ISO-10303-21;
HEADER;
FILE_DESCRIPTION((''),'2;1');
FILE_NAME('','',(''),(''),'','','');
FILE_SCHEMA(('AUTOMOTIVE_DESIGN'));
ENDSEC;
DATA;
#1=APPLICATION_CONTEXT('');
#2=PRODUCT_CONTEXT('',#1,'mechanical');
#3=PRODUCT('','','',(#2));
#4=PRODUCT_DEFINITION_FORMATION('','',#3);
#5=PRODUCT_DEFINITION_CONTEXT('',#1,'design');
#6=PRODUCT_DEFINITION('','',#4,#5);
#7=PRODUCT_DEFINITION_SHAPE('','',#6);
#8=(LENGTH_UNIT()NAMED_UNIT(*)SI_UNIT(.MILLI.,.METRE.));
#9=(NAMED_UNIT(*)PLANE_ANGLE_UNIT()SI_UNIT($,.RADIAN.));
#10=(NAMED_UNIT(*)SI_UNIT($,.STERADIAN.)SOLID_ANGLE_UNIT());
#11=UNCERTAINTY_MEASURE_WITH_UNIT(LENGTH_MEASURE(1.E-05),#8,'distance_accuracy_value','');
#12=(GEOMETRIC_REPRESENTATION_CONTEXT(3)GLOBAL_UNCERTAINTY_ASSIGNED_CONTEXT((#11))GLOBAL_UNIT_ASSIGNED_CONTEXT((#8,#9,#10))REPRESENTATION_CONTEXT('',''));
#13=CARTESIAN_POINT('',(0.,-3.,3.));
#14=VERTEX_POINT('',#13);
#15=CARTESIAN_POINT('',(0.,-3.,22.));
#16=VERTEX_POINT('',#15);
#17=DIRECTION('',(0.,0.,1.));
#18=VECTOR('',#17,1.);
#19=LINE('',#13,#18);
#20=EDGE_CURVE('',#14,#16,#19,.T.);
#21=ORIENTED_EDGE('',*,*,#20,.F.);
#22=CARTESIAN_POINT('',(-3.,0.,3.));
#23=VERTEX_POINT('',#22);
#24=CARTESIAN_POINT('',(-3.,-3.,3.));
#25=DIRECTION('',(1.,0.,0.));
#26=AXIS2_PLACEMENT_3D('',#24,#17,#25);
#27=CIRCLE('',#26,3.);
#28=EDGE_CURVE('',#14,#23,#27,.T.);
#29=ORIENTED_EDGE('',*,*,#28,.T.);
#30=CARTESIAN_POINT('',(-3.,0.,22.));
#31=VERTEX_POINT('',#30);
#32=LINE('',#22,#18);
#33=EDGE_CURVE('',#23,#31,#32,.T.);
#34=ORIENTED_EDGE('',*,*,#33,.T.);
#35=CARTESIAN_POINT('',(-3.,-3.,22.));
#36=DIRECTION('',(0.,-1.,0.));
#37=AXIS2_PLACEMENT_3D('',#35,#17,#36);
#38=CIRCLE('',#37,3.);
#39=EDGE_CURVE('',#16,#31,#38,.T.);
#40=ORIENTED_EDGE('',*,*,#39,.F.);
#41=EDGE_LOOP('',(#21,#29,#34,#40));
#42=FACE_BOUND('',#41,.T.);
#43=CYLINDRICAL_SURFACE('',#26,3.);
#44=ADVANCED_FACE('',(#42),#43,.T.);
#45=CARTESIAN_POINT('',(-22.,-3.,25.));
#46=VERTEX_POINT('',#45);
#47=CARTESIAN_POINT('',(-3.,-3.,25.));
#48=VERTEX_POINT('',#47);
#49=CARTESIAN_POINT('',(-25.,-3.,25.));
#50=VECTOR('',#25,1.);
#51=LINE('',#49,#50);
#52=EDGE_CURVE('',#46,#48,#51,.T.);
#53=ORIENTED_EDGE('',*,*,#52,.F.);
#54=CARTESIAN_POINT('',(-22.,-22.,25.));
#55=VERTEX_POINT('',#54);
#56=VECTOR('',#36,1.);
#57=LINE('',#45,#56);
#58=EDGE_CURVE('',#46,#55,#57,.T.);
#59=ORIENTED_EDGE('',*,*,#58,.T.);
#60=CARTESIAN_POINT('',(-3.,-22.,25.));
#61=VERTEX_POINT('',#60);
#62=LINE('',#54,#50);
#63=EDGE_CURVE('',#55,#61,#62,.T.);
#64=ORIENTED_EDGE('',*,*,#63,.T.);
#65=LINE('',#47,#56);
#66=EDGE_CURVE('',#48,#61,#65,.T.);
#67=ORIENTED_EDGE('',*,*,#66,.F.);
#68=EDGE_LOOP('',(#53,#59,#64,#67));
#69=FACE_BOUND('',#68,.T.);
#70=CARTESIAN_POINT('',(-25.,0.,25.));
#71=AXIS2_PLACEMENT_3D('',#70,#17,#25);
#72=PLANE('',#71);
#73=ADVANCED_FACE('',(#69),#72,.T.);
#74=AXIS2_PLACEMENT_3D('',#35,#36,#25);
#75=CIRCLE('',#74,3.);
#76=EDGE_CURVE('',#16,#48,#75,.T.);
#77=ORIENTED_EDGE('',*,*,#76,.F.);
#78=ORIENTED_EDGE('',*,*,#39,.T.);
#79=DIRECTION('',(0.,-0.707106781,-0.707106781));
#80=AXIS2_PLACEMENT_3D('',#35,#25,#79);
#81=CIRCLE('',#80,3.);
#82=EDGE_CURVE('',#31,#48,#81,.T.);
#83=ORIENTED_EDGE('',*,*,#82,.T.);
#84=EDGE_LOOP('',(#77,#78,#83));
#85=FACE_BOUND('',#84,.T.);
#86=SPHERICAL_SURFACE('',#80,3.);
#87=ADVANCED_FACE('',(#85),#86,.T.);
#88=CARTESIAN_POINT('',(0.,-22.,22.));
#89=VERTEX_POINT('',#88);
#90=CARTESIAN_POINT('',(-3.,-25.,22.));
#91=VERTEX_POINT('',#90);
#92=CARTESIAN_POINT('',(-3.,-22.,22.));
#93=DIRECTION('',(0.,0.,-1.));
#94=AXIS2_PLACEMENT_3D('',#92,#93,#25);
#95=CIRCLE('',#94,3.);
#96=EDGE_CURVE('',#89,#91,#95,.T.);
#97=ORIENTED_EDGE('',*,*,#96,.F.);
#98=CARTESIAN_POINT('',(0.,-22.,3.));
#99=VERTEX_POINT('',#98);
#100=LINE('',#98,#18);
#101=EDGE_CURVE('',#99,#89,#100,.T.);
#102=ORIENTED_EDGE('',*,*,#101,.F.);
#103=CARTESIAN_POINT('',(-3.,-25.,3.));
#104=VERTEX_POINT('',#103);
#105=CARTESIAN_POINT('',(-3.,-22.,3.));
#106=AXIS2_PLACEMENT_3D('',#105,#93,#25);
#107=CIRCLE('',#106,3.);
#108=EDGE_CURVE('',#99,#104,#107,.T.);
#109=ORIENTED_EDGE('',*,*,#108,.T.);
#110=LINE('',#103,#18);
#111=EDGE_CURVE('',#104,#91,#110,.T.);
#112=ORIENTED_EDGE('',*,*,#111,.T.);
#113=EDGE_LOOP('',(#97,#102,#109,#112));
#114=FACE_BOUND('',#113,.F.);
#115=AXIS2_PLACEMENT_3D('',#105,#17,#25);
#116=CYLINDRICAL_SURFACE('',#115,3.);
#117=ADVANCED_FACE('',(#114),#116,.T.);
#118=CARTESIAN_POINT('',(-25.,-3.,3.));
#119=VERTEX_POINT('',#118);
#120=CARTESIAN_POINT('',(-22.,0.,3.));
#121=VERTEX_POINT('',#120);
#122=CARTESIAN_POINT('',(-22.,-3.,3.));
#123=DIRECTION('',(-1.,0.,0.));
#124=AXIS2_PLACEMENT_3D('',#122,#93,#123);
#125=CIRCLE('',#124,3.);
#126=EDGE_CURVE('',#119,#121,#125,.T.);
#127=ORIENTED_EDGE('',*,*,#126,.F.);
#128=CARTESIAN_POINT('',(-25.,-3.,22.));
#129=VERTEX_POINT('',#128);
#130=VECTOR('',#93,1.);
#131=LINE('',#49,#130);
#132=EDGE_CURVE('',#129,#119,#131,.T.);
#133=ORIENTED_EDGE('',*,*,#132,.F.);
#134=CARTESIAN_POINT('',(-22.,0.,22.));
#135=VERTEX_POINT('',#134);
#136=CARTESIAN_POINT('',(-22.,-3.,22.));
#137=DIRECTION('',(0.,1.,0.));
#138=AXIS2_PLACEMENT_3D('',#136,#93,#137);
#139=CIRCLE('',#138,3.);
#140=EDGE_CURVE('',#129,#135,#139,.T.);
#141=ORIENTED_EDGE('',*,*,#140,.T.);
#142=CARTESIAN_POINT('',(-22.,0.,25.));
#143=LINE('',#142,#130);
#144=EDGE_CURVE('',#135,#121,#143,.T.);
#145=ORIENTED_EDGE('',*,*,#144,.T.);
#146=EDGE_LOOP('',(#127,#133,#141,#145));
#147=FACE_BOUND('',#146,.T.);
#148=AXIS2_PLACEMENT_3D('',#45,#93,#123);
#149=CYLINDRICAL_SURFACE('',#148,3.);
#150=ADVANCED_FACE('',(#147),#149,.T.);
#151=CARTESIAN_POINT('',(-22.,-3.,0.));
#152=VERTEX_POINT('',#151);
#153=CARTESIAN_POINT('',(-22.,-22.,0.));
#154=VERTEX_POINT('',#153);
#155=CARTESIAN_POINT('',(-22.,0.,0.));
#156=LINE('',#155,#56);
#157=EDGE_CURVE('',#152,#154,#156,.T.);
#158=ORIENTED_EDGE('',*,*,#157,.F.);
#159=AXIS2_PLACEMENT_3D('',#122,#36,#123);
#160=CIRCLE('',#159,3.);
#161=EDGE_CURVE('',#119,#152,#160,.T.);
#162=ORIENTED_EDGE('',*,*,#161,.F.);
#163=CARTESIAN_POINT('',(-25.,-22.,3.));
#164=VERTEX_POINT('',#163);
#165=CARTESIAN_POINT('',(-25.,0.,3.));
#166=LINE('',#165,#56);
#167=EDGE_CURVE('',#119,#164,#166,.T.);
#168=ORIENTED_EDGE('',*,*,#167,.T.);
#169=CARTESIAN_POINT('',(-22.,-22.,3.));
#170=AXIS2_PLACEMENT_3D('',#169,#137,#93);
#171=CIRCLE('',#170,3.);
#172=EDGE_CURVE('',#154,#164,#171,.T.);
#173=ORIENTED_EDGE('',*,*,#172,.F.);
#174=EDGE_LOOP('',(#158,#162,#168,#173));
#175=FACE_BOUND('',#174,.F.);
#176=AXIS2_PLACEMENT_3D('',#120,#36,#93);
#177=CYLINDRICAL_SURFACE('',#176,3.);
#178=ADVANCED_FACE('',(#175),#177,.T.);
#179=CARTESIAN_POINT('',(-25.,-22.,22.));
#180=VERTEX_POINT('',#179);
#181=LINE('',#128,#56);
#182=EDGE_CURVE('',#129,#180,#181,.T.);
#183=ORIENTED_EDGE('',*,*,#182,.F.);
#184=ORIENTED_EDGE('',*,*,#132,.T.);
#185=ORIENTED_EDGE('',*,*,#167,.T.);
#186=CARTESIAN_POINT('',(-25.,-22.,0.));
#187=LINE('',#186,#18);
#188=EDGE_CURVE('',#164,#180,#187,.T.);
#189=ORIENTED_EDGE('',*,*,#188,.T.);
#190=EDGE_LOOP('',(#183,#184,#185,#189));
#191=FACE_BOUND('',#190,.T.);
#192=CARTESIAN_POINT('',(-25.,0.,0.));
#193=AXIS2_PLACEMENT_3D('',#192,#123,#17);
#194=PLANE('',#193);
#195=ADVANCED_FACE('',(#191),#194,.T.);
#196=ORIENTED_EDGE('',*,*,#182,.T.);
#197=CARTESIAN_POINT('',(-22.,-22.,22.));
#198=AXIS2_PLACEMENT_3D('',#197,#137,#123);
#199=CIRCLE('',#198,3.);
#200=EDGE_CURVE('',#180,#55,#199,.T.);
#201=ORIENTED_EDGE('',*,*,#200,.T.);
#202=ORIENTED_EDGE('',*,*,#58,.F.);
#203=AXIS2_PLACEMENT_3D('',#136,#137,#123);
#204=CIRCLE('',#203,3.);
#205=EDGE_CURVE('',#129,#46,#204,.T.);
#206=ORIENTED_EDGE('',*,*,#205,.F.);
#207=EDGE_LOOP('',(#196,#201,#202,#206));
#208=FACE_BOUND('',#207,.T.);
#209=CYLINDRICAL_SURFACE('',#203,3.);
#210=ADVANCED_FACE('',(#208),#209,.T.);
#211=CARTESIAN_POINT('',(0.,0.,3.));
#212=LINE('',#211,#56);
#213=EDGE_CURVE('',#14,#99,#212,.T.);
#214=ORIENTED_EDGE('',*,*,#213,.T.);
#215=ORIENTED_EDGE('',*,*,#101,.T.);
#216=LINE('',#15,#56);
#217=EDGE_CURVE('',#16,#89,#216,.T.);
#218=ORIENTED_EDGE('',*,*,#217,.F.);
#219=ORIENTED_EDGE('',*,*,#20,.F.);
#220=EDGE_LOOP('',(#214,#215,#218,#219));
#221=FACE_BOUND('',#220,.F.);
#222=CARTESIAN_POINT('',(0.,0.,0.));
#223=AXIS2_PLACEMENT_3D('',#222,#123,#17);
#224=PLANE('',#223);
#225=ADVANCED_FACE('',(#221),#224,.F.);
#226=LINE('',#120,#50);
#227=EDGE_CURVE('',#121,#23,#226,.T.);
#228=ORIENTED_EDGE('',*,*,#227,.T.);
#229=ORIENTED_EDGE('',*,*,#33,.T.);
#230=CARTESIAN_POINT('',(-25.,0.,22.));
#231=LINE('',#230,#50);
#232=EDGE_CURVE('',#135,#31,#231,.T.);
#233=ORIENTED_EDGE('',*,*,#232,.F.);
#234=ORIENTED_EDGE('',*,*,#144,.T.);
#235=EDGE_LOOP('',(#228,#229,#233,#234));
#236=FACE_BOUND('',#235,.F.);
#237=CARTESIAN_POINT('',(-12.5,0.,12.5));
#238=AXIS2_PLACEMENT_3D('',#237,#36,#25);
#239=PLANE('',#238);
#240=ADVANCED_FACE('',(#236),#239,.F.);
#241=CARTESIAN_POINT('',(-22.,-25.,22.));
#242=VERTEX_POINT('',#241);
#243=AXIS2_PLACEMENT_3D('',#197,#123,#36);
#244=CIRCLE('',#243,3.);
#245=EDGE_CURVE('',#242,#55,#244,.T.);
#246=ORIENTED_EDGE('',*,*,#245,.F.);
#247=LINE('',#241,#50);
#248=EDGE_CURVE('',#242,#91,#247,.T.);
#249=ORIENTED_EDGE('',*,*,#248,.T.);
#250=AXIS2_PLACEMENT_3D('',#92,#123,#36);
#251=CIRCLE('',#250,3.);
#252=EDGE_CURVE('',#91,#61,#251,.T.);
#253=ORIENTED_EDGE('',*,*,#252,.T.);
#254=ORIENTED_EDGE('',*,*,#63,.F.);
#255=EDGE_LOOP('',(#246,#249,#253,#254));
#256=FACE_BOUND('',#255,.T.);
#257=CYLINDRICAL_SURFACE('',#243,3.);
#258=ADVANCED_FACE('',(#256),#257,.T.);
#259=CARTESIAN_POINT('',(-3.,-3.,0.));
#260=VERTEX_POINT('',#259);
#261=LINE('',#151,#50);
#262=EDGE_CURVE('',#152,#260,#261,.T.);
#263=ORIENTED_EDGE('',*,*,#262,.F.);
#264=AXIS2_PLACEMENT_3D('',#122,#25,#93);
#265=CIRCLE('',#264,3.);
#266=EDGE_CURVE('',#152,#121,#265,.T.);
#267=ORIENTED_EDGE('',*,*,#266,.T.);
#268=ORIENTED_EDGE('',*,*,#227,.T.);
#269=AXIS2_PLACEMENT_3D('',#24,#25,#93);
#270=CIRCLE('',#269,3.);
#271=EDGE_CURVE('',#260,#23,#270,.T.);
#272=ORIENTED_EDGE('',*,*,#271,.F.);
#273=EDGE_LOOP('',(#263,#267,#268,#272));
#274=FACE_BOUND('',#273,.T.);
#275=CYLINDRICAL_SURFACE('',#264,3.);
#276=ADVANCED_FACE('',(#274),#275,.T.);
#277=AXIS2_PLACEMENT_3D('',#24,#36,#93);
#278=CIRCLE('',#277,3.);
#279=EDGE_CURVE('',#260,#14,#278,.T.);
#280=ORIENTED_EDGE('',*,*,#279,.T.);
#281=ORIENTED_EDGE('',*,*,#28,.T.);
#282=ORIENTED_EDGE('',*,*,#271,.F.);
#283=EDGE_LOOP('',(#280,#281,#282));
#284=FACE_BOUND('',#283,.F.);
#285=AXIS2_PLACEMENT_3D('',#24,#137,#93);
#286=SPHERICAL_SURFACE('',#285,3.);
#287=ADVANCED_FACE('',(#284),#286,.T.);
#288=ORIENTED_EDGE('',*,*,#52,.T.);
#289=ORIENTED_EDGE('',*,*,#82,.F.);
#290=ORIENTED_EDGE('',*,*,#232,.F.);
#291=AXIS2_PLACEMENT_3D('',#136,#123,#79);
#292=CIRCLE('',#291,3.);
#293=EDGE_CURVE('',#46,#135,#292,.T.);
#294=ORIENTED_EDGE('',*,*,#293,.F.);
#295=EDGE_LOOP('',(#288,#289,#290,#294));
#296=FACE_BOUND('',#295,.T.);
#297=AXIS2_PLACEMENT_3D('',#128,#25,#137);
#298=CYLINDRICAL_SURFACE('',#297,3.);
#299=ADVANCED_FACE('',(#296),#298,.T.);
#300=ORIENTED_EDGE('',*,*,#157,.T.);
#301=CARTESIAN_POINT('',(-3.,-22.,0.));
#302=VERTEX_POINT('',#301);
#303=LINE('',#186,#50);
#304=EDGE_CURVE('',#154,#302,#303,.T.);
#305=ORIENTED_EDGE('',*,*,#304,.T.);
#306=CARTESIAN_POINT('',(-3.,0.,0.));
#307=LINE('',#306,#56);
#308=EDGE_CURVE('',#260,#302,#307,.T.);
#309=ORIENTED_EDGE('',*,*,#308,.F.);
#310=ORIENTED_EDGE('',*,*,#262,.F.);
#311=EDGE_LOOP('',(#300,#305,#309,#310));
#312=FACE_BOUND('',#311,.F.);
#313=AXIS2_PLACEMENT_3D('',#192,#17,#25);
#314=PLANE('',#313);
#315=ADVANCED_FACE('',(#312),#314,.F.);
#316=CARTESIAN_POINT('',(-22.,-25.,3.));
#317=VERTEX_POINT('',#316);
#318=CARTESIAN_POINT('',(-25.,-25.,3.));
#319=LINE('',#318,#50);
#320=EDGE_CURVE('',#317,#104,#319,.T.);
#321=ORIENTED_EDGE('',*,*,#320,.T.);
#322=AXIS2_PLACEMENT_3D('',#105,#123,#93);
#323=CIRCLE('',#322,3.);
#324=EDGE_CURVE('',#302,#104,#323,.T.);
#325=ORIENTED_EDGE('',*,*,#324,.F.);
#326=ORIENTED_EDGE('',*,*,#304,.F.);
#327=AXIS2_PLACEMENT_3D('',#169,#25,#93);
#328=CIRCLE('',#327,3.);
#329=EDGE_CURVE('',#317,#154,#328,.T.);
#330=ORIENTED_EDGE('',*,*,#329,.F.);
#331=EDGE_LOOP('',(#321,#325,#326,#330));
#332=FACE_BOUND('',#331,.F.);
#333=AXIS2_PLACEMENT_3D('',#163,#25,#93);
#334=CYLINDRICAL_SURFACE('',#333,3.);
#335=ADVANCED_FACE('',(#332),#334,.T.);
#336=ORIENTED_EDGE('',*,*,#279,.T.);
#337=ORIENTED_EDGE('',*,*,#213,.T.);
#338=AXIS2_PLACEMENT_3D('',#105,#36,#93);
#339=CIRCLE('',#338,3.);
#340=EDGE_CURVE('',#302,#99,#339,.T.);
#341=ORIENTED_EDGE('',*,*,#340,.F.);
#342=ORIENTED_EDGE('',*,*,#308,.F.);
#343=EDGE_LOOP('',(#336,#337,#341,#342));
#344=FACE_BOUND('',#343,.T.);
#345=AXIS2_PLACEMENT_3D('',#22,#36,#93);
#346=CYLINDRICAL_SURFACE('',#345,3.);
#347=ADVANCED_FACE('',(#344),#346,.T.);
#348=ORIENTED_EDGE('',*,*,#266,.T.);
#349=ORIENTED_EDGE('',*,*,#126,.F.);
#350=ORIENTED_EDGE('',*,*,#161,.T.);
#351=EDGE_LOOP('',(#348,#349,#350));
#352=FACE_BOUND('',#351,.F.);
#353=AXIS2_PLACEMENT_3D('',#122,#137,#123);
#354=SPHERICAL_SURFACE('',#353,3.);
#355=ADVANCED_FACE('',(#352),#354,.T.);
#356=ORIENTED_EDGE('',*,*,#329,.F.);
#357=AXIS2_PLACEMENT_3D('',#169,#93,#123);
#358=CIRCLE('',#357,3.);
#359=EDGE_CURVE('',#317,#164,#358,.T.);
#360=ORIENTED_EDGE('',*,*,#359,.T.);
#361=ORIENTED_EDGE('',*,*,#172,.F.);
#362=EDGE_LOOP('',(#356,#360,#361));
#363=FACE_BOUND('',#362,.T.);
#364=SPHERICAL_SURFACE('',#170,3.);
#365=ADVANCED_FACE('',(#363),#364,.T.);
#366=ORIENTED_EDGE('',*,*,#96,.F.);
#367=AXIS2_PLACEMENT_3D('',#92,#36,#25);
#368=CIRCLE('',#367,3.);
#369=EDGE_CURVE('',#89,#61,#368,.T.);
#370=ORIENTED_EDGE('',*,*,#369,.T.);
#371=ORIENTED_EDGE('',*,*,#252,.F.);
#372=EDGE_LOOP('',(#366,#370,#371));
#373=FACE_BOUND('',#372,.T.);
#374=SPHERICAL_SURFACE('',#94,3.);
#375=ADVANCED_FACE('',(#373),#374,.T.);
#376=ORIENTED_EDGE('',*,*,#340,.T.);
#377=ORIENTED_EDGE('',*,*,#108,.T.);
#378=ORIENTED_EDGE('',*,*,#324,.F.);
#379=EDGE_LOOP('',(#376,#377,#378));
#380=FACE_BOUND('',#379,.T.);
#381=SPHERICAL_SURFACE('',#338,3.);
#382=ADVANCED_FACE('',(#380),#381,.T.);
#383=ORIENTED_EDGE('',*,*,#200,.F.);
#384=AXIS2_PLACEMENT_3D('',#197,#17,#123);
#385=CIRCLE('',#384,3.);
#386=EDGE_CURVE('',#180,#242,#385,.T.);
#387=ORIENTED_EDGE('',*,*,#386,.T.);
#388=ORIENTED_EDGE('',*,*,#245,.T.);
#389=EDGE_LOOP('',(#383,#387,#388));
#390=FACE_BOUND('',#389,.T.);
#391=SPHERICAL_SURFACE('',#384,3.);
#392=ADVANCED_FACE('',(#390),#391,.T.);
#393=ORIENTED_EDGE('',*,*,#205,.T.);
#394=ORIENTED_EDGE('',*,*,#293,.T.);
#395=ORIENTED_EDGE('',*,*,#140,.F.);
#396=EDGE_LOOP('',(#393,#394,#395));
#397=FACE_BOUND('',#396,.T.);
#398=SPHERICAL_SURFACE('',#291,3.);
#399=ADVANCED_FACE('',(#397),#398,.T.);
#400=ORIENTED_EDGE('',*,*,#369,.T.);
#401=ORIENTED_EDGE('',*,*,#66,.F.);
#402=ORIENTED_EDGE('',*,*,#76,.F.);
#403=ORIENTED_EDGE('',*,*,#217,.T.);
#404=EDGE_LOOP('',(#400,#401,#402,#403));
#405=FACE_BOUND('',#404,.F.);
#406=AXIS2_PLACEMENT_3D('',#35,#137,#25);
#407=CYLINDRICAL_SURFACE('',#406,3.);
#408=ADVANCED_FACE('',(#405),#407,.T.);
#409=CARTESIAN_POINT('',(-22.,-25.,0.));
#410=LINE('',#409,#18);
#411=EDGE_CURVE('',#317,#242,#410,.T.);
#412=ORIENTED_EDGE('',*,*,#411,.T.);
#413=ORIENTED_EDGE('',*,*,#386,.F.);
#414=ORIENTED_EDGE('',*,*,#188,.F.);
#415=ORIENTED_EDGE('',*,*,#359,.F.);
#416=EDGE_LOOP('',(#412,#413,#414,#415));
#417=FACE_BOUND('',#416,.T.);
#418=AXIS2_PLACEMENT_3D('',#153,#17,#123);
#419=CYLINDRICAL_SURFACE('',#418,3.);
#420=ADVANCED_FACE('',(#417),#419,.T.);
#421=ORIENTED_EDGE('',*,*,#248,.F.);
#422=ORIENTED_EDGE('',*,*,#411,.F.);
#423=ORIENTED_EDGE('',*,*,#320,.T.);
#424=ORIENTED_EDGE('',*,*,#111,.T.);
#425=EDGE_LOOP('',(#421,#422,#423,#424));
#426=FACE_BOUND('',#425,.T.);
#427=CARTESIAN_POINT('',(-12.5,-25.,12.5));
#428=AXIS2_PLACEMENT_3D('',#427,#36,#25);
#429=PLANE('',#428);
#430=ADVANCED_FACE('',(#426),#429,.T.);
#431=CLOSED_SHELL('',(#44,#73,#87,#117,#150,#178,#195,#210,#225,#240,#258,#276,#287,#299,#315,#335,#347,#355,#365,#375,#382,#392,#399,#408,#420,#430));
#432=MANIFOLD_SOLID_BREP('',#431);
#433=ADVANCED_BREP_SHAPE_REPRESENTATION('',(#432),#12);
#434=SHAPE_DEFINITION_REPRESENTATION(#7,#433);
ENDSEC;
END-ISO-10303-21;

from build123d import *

# Parameters (mm, degrees)
F0_W         = 25
F0_H         = 25
F1_DEPTH     = 25
F2_R         = 3
F3_R         = 3
F4_R         = 3
F5_T1_DEPTH  = 19
F5_T3_DEPTH  = 19
F5_S7_W      = 3
F5_S7_H      = 3
F5_T8_DEPTH  = 3
F5_S13_W     = 3
F5_S13_H     = 3
F5_T14_DEPTH = 3
F5_T18_ANGLE = 90
F5_T20_ANGLE = 90


# Not quite as in the source:
# - a fillet or chamfer that OpenCascade refuses, or shapes differently, is made with other operations: its cross-section is extruded or revolved along the edge and cut away or added


with BuildPart() as f1:
    # F0 (on Front) → F1 (new body)
    with BuildSketch(Plane.XZ):
        with Locations((-12.5, 12.5)):
            Rectangle(F0_W, F0_H)
    extrude(amount=F1_DEPTH)

    # F2
    f2_edges = [f1.edges().sort_by_distance(p)[0] for p in [
        (0, -12.5, 0),
    ]]
    fillet(f2_edges, radius=F2_R)

    # F3
    f3_edges = [f1.edges().sort_by_distance(p)[0] for p in [
        (-25, -12.5, 0),
        (-14, -25, 0),
        (-25, -25, 12.5),
    ]]
    fillet(f3_edges, radius=F3_R)

    # F4
    f4_edges = [f1.edges().sort_by_distance(p)[0] for p in [
        (-12.5, 0, 0),
        (0, 0, 14),
        (-25, 0, 14),
        (-12.5, 0, 25),
    ]]
    fillet(f4_edges, radius=F4_R)

    # F5: fillet of radius 3 on 3 edges, made by hand

    # F5_s2 → F5_t1 (cut)
    with BuildSketch(Plane.XZ.offset(3)):
        with BuildLine():
            ThreePointArc((-25, 22), (-24.1213203436, 24.1213203436), (-22, 25))
            Line((-22, 25), (-25, 25))
            Line((-25, 25), (-25, 22))
        make_face()
        with BuildLine():
            ThreePointArc((0, 22), (-0.8786796564, 24.1213203436), (-3, 25))
            Line((-3, 25), (0, 25))
            Line((0, 25), (0, 22))
        make_face()
    extrude(amount=F5_T1_DEPTH, mode=Mode.SUBTRACT)

    # F5_s4 → F5_t3 (cut)
    with BuildSketch(Plane.YZ.offset(-22)):
        with BuildLine():
            ThreePointArc((-25, 22), (-24.1213203436, 24.1213203436), (-22, 25))
            Line((-22, 25), (-25, 25))
            Line((-25, 25), (-25, 22))
        make_face()
    extrude(amount=F5_T3_DEPTH, mode=Mode.SUBTRACT)


with BuildPart() as f5_tool6:
    # F5_s7 → F5_t8 (new body)
    with BuildSketch(Plane.YZ.offset(-3)):
        with Locations((-1.5, 23.5)):
            Rectangle(F5_S7_W, F5_S7_H)
    extrude(amount=F5_T8_DEPTH)

    # F5_s9 → F5_t10 (revolve, cut)
    with BuildSketch(Plane(origin=(-3, -3, 22), x_dir=(0, -0.7071067812, -0.7071067812), z_dir=(0, -0.7071067812, 0.7071067812))):
        with BuildLine():
            ThreePointArc((0, -3), (3, 0), (0, 3))
            Line((0, 3), (0, -3))
        make_face()
    revolve(axis=Axis((-3, -3, 22), (1, 0, 0)), mode=Mode.SUBTRACT)


with BuildPart() as f1_1:
    add(f1.part)

    # F5_t5: cut F5_tool6
    add(f5_tool6.part, mode=Mode.SUBTRACT)


with BuildPart() as f5_tool12:
    # F5_s13 → F5_t14 (new body)
    with BuildSketch(Plane.YZ.offset(-22)):
        with Locations((-1.5, 23.5)):
            Rectangle(F5_S13_W, F5_S13_H)
    extrude(amount=-F5_T14_DEPTH)

    # F5_s15 → F5_t16 (revolve, cut)
    with BuildSketch(Plane(origin=(-22, -3, 22), x_dir=(0, -0.7071067812, -0.7071067812), z_dir=(0, 0.7071067812, -0.7071067812))):
        with BuildLine():
            ThreePointArc((0, -3), (3, 0), (0, 3))
            Line((0, 3), (0, -3))
        make_face()
    revolve(axis=Axis((-22, -3, 22), (-1, 0, 0)), mode=Mode.SUBTRACT)


with BuildPart() as f1_2:
    add(f1_1.part)

    # F5_t11: cut F5_tool12
    add(f5_tool12.part, mode=Mode.SUBTRACT)

    # F5_s17 → F5_t18 (revolve, cut)
    with BuildSketch(Plane.XZ.offset(22)):
        with BuildLine():
            ThreePointArc((-3, 25), (-0.8786796564, 24.1213203436), (0, 22))
            Line((0, 22), (0, 25))
            Line((0, 25), (-3, 25))
        make_face()
    revolve(axis=Axis((-3, -22, 25), (0, 0, -1)), revolution_arc=F5_T18_ANGLE, mode=Mode.SUBTRACT)

    # F5_s19 → F5_t20 (revolve, cut)
    with BuildSketch(Plane.XZ.offset(22)):
        with BuildLine():
            ThreePointArc((-25, 22), (-24.1213203436, 24.1213203436), (-22, 25))
            Line((-22, 25), (-25, 25))
            Line((-25, 25), (-25, 22))
        make_face()
    revolve(axis=Axis((-22, -22, 25), (0, 0, 1)), revolution_arc=F5_T20_ANGLE, mode=Mode.SUBTRACT)


solid = f1_2.part
